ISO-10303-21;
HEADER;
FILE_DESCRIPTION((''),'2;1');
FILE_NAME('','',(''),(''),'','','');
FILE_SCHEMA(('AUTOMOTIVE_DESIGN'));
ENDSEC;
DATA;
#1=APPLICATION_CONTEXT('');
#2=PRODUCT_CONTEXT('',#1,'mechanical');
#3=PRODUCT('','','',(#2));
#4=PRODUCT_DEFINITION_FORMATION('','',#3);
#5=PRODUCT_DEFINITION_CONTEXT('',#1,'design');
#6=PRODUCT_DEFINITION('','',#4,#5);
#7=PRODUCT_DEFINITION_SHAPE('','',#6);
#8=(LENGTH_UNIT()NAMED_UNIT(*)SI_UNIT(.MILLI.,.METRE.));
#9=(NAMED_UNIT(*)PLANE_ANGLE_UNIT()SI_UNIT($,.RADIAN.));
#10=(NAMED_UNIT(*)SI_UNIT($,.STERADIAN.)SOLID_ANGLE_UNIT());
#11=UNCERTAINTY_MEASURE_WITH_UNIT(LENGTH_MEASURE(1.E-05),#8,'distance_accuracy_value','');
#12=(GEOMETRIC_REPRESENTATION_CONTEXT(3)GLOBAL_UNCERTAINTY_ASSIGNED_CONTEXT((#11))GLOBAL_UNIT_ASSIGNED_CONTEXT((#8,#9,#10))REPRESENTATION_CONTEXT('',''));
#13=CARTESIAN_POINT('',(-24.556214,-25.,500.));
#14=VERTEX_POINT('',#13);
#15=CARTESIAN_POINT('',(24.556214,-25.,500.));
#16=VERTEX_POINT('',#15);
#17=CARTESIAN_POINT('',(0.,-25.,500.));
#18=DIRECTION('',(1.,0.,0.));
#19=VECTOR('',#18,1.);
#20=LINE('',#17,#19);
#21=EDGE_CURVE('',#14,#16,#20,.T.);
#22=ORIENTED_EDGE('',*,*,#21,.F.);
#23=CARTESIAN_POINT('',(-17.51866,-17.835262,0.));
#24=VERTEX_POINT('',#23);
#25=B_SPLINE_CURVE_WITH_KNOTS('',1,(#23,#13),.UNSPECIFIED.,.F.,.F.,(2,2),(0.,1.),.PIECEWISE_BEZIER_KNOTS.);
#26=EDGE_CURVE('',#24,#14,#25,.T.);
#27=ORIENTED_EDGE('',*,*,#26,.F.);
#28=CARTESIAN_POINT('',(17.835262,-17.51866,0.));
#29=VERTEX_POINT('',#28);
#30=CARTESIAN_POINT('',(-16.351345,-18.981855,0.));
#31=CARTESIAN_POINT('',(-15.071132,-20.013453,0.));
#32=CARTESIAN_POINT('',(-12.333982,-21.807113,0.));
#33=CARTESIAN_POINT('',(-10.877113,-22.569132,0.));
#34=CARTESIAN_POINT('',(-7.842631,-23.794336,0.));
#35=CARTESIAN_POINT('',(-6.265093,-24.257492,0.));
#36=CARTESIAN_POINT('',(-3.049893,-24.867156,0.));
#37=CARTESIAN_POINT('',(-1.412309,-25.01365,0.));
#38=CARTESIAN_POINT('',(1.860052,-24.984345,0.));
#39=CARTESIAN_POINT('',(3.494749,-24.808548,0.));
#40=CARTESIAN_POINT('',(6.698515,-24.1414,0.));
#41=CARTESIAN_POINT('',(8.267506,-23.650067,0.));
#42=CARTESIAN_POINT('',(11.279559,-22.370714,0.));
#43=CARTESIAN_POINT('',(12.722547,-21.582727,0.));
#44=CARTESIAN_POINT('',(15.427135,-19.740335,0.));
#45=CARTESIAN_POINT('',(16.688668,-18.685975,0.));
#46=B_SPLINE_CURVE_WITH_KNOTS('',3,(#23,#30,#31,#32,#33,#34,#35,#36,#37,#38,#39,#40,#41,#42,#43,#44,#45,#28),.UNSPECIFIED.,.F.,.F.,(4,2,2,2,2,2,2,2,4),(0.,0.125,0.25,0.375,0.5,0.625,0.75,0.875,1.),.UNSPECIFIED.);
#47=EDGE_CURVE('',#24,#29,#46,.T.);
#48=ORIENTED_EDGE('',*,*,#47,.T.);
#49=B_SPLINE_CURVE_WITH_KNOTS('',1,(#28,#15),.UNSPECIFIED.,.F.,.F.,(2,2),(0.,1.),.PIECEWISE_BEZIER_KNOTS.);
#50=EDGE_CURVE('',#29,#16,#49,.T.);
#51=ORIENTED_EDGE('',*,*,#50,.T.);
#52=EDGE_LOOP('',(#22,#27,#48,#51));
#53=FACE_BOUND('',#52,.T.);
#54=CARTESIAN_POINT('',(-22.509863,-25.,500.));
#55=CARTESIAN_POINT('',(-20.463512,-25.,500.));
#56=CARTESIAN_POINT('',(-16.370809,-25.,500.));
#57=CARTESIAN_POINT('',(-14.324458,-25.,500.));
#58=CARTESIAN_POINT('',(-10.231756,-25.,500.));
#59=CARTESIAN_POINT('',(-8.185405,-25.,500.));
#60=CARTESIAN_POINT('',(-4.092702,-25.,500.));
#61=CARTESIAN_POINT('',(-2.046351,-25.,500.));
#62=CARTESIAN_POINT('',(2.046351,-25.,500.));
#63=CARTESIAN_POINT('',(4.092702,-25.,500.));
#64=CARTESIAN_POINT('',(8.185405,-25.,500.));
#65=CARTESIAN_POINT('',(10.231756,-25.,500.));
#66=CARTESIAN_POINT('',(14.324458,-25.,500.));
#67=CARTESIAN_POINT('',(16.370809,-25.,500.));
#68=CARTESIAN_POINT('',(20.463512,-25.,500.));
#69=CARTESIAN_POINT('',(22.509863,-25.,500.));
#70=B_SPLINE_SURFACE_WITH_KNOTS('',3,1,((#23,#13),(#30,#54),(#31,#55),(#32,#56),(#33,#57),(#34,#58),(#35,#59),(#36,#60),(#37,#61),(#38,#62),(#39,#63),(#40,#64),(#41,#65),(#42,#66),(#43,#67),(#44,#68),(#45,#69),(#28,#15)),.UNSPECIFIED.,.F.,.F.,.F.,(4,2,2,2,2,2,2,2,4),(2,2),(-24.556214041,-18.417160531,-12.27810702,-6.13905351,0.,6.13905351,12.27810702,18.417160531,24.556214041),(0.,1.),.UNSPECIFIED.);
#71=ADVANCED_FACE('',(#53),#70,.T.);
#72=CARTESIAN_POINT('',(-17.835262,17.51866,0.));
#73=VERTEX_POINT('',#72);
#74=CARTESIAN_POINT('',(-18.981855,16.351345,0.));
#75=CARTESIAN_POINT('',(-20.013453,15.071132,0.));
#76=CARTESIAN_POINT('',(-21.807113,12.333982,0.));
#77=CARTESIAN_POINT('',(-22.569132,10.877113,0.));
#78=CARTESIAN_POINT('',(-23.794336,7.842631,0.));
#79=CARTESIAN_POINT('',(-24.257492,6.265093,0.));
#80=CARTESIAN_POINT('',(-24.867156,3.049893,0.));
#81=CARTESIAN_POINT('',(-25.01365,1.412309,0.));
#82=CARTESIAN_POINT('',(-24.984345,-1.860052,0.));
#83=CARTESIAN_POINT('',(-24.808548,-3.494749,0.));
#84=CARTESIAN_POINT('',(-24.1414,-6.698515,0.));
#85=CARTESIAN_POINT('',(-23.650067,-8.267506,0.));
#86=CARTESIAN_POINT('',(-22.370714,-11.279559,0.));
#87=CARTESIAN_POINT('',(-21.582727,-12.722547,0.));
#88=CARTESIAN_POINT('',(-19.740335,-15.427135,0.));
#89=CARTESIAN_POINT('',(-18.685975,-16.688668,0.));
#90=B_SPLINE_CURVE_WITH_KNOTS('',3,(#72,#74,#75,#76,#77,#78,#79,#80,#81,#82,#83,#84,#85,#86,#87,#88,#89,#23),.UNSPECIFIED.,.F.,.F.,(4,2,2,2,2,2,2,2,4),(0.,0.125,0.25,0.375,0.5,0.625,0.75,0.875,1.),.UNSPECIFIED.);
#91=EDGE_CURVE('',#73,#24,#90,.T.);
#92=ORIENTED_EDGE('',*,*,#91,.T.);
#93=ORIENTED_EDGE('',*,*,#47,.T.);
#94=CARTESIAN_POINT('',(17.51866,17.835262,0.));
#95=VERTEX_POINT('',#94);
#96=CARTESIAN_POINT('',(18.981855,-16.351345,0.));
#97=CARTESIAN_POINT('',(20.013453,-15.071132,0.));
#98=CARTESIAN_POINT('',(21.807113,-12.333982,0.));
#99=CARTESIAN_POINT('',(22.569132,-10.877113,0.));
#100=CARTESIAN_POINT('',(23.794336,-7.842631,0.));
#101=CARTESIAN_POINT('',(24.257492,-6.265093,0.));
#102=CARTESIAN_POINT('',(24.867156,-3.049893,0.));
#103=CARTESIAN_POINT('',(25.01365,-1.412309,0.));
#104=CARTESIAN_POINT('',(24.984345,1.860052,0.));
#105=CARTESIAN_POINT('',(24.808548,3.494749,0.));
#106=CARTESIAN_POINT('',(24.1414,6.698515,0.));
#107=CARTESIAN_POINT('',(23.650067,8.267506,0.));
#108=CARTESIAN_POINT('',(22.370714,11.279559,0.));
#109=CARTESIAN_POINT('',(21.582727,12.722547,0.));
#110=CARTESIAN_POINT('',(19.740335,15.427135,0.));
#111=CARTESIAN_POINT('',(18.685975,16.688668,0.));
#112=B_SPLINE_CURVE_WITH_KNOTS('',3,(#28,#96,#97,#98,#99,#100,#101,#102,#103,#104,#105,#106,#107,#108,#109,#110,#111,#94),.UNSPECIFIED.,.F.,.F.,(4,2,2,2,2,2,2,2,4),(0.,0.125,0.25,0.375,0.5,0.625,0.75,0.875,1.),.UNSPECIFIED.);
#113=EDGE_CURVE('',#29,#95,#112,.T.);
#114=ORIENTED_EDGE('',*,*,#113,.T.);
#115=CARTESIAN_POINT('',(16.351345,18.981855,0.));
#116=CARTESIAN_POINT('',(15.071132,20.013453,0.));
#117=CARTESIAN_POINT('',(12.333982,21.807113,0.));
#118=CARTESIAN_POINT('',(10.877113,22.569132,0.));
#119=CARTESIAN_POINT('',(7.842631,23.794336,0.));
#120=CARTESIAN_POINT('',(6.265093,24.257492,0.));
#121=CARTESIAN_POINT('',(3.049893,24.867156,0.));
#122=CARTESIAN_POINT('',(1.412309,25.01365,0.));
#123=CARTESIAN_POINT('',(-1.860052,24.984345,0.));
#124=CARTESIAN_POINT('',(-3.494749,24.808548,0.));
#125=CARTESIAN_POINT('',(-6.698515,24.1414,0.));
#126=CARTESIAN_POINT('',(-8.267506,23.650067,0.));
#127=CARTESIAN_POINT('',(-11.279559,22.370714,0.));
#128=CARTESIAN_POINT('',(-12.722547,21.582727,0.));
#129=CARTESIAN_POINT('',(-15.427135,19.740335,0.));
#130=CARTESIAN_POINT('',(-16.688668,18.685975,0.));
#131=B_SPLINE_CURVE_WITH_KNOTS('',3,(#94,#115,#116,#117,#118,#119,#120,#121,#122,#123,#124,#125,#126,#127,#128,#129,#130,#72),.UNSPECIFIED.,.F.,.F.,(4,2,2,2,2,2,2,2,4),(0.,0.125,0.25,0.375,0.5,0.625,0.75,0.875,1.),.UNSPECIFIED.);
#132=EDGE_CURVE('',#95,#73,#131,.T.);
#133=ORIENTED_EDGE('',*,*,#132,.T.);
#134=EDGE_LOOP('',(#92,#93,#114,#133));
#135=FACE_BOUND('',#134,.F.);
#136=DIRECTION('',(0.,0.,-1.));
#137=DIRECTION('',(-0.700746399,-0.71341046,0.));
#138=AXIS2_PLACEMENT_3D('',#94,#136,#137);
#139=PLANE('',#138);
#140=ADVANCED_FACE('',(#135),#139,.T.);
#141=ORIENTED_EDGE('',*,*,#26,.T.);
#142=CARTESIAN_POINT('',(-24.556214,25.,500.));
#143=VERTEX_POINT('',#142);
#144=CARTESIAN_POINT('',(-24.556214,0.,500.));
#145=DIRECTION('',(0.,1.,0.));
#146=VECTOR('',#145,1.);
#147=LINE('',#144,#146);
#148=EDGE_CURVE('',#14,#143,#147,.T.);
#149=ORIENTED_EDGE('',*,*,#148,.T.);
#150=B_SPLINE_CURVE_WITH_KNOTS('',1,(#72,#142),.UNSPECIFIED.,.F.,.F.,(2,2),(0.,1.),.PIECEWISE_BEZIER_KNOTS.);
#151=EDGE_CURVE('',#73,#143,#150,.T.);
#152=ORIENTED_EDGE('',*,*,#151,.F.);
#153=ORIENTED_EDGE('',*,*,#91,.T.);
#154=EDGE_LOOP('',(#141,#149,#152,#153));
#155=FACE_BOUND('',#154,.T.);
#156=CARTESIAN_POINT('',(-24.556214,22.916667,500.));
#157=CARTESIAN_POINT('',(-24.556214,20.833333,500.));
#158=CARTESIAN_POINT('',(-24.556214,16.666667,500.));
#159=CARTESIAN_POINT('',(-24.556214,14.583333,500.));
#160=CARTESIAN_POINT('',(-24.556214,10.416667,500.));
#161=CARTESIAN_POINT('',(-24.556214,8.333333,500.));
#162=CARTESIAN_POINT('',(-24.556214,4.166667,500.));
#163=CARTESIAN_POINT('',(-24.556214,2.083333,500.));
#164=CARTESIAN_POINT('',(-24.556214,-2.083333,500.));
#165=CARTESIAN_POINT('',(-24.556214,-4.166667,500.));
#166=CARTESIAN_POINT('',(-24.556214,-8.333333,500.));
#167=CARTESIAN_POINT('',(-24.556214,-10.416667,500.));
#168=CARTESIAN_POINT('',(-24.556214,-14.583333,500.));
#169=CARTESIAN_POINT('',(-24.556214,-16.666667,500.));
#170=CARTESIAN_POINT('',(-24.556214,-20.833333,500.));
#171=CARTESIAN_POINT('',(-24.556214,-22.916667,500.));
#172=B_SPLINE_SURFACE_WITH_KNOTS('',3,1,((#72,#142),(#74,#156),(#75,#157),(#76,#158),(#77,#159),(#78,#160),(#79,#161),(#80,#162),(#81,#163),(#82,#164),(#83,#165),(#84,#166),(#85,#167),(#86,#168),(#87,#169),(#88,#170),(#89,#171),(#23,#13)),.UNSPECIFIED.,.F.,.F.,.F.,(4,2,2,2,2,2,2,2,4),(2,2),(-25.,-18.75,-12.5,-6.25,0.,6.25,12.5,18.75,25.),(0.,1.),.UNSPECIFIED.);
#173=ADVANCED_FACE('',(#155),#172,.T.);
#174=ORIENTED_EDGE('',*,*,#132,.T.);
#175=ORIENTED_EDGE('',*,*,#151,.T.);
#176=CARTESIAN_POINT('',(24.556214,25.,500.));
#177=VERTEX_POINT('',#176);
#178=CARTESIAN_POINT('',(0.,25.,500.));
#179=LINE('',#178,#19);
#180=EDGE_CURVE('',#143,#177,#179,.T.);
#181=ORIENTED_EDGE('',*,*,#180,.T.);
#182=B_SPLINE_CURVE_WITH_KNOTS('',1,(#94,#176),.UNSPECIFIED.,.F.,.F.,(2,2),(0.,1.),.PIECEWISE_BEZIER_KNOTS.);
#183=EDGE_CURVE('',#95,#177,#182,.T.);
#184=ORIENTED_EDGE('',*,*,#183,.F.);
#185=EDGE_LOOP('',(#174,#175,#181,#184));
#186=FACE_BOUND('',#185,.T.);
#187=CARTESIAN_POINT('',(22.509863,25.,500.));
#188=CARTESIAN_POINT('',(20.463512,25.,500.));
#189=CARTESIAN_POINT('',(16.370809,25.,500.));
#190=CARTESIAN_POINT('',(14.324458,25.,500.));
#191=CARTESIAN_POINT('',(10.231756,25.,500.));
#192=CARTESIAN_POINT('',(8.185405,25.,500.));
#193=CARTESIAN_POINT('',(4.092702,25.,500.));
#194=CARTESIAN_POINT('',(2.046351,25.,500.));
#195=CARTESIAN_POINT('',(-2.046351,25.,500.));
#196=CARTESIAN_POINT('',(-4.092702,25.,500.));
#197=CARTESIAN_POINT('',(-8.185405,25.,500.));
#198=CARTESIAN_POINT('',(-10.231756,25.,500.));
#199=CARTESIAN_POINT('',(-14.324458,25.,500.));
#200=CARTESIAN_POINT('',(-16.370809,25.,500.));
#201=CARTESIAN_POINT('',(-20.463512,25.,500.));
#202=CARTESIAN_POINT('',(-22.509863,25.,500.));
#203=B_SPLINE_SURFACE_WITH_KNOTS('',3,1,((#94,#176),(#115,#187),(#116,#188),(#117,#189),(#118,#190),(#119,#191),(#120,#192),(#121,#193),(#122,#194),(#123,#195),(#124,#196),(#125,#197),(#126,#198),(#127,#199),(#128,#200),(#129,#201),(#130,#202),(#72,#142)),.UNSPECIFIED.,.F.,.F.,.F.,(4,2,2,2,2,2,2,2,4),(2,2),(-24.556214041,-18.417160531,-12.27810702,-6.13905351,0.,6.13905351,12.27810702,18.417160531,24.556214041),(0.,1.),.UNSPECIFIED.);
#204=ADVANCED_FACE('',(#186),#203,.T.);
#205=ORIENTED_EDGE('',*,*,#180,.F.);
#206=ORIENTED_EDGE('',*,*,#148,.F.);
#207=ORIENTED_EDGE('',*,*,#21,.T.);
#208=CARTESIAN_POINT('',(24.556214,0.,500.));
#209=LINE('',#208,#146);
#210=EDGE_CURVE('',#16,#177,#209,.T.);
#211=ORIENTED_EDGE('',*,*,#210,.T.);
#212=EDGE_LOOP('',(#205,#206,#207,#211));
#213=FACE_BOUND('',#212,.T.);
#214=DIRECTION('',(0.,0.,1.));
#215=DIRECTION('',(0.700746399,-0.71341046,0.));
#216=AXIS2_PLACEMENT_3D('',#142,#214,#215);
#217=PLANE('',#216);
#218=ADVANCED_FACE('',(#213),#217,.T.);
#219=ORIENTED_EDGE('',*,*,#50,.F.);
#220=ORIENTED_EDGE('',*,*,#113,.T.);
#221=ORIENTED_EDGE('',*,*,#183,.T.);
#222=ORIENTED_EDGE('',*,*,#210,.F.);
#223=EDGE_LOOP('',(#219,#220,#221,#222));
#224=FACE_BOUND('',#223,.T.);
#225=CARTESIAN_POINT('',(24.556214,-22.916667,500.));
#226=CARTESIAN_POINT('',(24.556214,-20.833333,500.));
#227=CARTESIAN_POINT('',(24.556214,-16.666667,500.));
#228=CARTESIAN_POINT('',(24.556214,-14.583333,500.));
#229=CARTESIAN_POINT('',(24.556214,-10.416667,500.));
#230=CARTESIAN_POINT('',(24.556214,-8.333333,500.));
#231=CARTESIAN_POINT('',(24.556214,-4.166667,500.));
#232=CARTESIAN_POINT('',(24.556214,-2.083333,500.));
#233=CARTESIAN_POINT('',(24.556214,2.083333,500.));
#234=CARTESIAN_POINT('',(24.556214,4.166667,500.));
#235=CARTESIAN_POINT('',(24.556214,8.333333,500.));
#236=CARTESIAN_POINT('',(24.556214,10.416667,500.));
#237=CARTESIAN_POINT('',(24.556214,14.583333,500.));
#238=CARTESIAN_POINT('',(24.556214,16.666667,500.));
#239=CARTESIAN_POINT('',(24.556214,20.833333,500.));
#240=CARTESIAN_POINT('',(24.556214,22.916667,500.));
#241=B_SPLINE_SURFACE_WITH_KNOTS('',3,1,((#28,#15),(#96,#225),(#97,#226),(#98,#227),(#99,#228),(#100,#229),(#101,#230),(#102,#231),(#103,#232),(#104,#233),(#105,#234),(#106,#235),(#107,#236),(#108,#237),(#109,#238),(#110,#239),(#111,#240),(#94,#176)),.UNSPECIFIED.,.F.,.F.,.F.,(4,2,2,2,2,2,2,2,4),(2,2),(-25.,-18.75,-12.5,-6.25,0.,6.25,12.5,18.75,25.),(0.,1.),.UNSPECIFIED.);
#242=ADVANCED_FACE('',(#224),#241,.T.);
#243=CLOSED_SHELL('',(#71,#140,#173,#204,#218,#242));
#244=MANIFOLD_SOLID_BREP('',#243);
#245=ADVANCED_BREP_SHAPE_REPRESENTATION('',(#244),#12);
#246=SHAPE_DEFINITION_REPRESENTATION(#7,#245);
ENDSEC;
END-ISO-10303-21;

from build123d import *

# Parameters (mm, degrees)
F0_W     = 50
F0_H     = 50
F1_DEPTH = 500
F5_W     = 49.1124280814
F5_H     = 50


# Not quite as in the source:
# - the arcs of a loft's sections are written as splines that run evenly, so that the points pair up as in the source's solid


with BuildPart() as f1:
    # F0 (on Top) → F1 (new body)
    with BuildSketch(Plane.XY):
        with Locations((-40.0555571541, -0.6388908335)):
            Rectangle(F0_W, F0_H)
    extrude(amount=F1_DEPTH)


with BuildPart() as f6:
    # F3 (on Top) → F6 section 0
    with BuildSketch(Plane.XY):
        with BuildLine():
            add(Edge.make_bspline(
                [(17.5186599633, 17.8352615088), (16.3513448273, 18.9818551222), (15.0711317337, 20.0134527208), (12.3339820931, 21.8071132264), (10.8771132275, 22.5691317816), (7.8426313441, 23.7943361988), (6.2650933599, 24.2574917651), (3.0498926708, 24.8671561751), (1.412309468, 25.0136499437), (-1.8600516675, 24.9843452853), (-3.4947486847, 24.8085475829), (-6.6985152634, 24.1414000176), (-8.2675056054, 23.6500666512), (-11.2795586742, 22.3707142858), (-12.7225469221, 21.5827269212), (-15.4271349709, 19.7403345496), (-16.6886678955, 18.6859750994), (-17.8352615088, 17.5186599633)],
                knots=[0, 0, 0, 0, 0.125, 0.125, 0.25, 0.25, 0.375, 0.375, 0.5, 0.5, 0.625, 0.625, 0.75, 0.75, 0.875, 0.875, 1, 1, 1, 1], degree=3))
            add(Edge.make_bspline(
                [(-17.8352615088, 17.5186599633), (-18.9818551222, 16.3513448273), (-20.0134527208, 15.0711317337), (-21.8071132264, 12.3339820931), (-22.5691317816, 10.8771132275), (-23.7943361988, 7.8426313441), (-24.2574917651, 6.2650933599), (-24.8671561751, 3.0498926708), (-25.0136499437, 1.412309468), (-24.9843452853, -1.8600516675), (-24.8085475829, -3.4947486847), (-24.1414000176, -6.6985152634), (-23.6500666512, -8.2675056054), (-22.3707142858, -11.2795586742), (-21.5827269212, -12.7225469221), (-19.7403345496, -15.4271349709), (-18.6859750994, -16.6886678955), (-17.5186599633, -17.8352615088)],
                knots=[0, 0, 0, 0, 0.125, 0.125, 0.25, 0.25, 0.375, 0.375, 0.5, 0.5, 0.625, 0.625, 0.75, 0.75, 0.875, 0.875, 1, 1, 1, 1], degree=3))
            add(Edge.make_bspline(
                [(-17.5186599633, -17.8352615088), (-16.3513448273, -18.9818551222), (-15.0711317337, -20.0134527208), (-12.3339820931, -21.8071132264), (-10.8771132275, -22.5691317816), (-7.8426313441, -23.7943361988), (-6.2650933599, -24.2574917651), (-3.0498926708, -24.8671561751), (-1.412309468, -25.0136499437), (1.8600516675, -24.9843452853), (3.4947486847, -24.8085475829), (6.6985152634, -24.1414000176), (8.2675056054, -23.6500666512), (11.2795586742, -22.3707142858), (12.7225469221, -21.5827269212), (15.4271349709, -19.7403345496), (16.6886678955, -18.6859750994), (17.8352615088, -17.5186599633)],
                knots=[0, 0, 0, 0, 0.125, 0.125, 0.25, 0.25, 0.375, 0.375, 0.5, 0.5, 0.625, 0.625, 0.75, 0.75, 0.875, 0.875, 1, 1, 1, 1], degree=3))
            add(Edge.make_bspline(
                [(17.8352615088, -17.5186599633), (18.9818551222, -16.3513448273), (20.0134527208, -15.0711317337), (21.8071132264, -12.3339820931), (22.5691317816, -10.8771132275), (23.7943361988, -7.8426313441), (24.2574917651, -6.2650933599), (24.8671561751, -3.0498926708), (25.0136499437, -1.412309468), (24.9843452853, 1.8600516675), (24.8085475829, 3.4947486847), (24.1414000176, 6.6985152634), (23.6500666512, 8.2675056054), (22.3707142858, 11.2795586742), (21.5827269212, 12.7225469221), (19.7403345496, 15.4271349709), (18.6859750994, 16.6886678955), (17.5186599633, 17.8352615088)],
                knots=[0, 0, 0, 0, 0.125, 0.125, 0.25, 0.25, 0.375, 0.375, 0.5, 0.5, 0.625, 0.625, 0.75, 0.75, 0.875, 0.875, 1, 1, 1, 1], degree=3))
        make_face()
    # F5 (on offset) → F6 section 1
    with BuildSketch(Plane.XY.offset(500)):
        Rectangle(F5_W, F5_H)
    loft(ruled=True)


solid = f6.part
